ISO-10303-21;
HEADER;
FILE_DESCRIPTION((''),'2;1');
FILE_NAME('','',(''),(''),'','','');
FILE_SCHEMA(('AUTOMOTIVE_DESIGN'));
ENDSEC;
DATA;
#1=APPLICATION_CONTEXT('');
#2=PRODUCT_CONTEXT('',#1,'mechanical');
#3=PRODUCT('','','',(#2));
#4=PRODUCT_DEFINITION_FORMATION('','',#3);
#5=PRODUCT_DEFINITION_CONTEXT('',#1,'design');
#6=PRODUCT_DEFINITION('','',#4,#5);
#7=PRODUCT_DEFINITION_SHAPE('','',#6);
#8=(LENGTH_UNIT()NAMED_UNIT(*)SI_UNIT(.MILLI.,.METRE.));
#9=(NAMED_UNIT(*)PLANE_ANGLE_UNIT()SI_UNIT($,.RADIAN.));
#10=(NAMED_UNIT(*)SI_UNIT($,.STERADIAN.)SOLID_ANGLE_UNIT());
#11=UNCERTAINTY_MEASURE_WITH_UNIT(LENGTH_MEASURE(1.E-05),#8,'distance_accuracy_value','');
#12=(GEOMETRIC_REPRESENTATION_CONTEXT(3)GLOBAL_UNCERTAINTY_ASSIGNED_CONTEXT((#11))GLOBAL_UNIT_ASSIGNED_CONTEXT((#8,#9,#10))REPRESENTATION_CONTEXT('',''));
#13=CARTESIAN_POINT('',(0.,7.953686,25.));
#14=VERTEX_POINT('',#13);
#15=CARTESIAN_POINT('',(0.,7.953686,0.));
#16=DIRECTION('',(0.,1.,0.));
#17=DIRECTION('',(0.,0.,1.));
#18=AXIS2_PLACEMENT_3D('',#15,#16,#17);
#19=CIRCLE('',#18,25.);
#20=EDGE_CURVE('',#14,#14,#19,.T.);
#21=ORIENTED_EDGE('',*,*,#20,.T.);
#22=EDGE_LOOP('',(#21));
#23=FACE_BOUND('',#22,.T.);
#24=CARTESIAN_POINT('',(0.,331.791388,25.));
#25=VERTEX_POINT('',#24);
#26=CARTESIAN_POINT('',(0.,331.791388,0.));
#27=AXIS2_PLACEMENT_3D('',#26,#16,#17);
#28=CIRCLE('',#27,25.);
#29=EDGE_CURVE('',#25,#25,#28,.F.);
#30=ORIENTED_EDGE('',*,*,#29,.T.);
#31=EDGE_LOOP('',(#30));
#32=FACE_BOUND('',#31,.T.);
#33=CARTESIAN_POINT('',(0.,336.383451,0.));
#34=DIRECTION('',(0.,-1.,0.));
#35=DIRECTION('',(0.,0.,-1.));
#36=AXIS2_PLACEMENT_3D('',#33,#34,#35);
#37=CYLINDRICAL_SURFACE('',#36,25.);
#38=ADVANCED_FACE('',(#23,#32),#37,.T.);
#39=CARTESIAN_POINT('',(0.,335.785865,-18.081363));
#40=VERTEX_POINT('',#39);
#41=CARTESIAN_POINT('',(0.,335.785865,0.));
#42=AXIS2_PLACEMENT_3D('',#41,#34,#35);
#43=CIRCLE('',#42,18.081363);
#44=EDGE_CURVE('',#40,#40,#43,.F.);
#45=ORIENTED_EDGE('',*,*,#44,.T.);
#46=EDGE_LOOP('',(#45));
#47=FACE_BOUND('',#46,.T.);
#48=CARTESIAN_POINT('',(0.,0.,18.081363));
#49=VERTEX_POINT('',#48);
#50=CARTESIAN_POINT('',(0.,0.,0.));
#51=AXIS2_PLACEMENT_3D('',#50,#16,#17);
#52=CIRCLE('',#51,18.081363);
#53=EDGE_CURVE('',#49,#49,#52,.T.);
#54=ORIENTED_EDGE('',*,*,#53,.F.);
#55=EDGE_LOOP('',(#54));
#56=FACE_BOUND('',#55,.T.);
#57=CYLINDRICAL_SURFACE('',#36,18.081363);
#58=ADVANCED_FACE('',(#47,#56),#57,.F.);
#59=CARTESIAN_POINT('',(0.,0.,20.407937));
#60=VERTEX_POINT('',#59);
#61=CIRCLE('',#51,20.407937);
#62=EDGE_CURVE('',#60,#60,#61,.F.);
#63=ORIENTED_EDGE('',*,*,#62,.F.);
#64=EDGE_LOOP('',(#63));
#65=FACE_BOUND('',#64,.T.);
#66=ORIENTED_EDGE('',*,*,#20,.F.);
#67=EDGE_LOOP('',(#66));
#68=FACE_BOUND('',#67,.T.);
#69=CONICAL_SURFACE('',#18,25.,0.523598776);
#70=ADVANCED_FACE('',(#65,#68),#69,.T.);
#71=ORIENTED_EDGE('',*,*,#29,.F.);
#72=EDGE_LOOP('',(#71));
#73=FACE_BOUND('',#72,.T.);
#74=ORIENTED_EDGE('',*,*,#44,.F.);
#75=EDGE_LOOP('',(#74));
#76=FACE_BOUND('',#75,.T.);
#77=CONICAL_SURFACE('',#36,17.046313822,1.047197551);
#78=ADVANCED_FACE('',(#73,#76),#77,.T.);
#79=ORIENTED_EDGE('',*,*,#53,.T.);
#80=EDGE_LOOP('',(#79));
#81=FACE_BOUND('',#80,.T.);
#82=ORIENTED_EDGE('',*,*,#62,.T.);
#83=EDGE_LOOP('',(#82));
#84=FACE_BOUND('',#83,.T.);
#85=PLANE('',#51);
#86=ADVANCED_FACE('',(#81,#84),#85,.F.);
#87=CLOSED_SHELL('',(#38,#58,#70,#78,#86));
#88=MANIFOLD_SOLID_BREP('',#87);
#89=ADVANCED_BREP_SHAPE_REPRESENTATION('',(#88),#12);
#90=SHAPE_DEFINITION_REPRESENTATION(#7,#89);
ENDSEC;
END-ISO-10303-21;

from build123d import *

# Parameters (mm, degrees)
SKETCH1_R           = 25
BOSS_EXTRUDE1_DEPTH = 336.383451
SKETCH2_R           = 18.081362876
CUT_EXTRUDE1_DEPTH  = 339.236346519
CHAMFER1_SIZE       = 4.592063
CHAMFER1_SIZE_2     = 7.953686


with BuildPart() as part:
    # Sketch1 → Boss-Extrude1 (new body)
    with BuildSketch(Plane(origin=(0, 0, 0), x_dir=(1, 0, 0), z_dir=(0, 1, 0))):
        with Locations(Location((0, 0, 0), (0, 0, 270))):
            Circle(SKETCH1_R)
    extrude(amount=BOSS_EXTRUDE1_DEPTH)

    # Sketch2 → Cut-Extrude1 (cut, through all)
    with BuildSketch(Plane(origin=(0, 0, 0), x_dir=(1, 0, 0), z_dir=(0, 1, 0))):
        with Locations(Location((0, 0, 0), (0, 0, 270))):
            Circle(SKETCH2_R)
    extrude(amount=CUT_EXTRUDE1_DEPTH, mode=Mode.SUBTRACT)

    # Chamfer1
    # the kernel refuses this chamfer: 7.953686, 4.592063 mm, written as the material it takes off along each edge
    with BuildSketch(Plane(origin=(0, 336.383451, 0), x_dir=(0, 0, 1), z_dir=(-1, 0, 0))) as chamfer1_piece_1:
        Polygon((25, -CHAMFER1_SIZE), (25 - CHAMFER1_SIZE_2, 0), (25, 0), align=None)
    revolve(axis=Axis((0, 336.383451, 0), (0, 1, 0)), mode=Mode.SUBTRACT)
    with BuildSketch(Plane(origin=(0, 0, 0), x_dir=(0, 0, 1), z_dir=(-1, 0, 0))) as chamfer1_piece_2:
        Polygon((25, CHAMFER1_SIZE_2), (25 - CHAMFER1_SIZE, 0), (25, 0), align=None)
    revolve(axis=Axis((0, 0, 0), (0, 1, 0)), mode=Mode.SUBTRACT)


solid = part.part
